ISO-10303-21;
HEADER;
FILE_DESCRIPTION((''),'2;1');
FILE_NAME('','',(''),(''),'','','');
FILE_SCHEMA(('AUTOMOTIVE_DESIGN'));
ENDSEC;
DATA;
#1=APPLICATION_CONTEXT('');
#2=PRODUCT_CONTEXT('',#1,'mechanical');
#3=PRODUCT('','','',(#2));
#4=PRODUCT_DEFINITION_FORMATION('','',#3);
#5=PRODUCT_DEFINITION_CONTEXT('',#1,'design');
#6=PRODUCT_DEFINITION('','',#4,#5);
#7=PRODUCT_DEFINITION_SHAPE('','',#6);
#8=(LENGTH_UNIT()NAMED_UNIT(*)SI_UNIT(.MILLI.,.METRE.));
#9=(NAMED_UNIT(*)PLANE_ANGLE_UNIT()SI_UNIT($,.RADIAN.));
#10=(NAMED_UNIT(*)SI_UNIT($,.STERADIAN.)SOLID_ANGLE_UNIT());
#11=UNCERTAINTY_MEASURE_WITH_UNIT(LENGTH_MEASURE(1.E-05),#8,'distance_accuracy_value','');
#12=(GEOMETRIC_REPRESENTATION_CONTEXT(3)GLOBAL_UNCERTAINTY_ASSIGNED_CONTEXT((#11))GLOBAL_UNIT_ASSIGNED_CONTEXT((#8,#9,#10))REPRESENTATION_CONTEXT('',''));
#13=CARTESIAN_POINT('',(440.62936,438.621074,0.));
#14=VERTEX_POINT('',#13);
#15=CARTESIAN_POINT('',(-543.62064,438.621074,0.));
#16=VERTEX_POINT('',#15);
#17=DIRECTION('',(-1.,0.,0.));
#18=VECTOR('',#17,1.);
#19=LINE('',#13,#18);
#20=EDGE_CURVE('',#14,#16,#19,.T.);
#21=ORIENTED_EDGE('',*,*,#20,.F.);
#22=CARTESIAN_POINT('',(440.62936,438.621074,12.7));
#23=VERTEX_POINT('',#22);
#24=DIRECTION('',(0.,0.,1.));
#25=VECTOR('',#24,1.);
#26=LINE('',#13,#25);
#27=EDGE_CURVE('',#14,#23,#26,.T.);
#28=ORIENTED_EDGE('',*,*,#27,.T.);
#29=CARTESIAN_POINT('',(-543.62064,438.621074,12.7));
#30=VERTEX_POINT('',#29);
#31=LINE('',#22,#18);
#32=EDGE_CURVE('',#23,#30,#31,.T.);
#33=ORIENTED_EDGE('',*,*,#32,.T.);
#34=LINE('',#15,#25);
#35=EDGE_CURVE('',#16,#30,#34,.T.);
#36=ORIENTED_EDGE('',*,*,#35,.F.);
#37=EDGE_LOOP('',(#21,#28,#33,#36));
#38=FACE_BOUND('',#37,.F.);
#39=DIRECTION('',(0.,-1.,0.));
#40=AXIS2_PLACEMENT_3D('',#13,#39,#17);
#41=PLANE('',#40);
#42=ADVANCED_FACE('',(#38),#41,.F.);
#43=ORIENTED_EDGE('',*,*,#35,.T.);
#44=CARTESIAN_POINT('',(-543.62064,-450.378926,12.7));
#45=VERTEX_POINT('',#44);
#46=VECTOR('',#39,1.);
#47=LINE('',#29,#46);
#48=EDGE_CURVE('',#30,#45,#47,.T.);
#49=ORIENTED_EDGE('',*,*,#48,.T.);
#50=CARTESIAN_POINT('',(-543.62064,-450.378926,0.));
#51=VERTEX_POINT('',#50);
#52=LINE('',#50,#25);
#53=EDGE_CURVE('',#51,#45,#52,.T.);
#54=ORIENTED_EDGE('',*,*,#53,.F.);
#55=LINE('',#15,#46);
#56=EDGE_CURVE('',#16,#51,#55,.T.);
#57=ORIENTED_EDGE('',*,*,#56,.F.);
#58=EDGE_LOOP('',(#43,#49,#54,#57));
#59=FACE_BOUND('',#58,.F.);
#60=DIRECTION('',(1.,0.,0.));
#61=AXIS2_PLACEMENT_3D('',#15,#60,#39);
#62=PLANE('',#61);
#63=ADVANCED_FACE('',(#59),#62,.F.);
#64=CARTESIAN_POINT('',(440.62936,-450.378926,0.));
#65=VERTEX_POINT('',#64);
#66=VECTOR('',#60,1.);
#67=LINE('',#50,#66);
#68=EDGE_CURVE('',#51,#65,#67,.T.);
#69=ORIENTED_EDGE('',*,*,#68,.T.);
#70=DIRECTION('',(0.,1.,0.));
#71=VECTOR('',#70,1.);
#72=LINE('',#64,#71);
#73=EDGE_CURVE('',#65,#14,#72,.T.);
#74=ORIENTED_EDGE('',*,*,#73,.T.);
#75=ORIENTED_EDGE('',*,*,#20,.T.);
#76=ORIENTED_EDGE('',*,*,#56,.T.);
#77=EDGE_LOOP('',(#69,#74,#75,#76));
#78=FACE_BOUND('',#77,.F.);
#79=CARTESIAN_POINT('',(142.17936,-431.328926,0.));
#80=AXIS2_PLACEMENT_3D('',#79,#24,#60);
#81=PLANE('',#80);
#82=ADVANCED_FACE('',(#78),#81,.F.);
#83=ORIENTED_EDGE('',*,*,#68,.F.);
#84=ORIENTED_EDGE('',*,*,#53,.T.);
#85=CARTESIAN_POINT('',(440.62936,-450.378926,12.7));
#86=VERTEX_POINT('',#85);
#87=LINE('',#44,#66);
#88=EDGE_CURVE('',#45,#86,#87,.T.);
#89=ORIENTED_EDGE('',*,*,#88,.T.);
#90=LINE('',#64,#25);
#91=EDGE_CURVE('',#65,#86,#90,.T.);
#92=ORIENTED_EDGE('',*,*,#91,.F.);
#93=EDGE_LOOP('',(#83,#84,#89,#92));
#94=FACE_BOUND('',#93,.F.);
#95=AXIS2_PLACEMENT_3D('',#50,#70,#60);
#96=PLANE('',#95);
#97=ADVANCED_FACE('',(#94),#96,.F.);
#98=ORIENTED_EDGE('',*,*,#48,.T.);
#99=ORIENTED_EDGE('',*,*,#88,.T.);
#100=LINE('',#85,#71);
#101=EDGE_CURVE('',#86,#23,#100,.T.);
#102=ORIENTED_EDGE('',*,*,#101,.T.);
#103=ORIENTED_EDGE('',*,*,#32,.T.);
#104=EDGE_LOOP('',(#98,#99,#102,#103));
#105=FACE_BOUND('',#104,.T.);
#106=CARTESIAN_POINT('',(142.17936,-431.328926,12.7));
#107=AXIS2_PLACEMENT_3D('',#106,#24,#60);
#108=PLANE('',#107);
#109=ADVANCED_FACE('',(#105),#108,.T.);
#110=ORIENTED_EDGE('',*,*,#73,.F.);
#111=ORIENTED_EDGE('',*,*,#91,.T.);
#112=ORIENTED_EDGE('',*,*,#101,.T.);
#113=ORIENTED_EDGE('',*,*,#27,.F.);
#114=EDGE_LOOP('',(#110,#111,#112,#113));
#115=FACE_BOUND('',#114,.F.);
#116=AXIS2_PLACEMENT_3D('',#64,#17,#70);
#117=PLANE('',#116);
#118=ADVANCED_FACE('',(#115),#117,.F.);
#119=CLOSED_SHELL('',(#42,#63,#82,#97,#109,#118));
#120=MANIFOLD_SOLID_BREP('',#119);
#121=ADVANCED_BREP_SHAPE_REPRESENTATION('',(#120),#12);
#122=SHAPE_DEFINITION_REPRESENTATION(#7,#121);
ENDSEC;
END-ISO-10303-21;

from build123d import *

# Parameters (mm, degrees)
F0_W     = 38.1
F0_H     = 38.1
F0_W_2   = 628.65
F0_H_2   = 812.8
F1_DEPTH = 12.7


with BuildPart() as f1:
    # F0 (on Top) → F1 (new body)
    with BuildSketch(Plane.XY):
        with Locations((142.1793598415, -431.3289260195)):
            Rectangle(F0_W, F0_H)
        Polygon((161.2293598415, 399.428513117), (161.2293598415, -412.2789260195), (161.2293598415, -450.3789260195), (440.6293598415, -450.3789260195), (440.6293598415, 438.6210739805), (161.2293598415, 438.6210739805), (161.2293598415, 400.5210739805), align=None)
        Polygon((123.1293598415, -412.2789260195), (161.2293598415, -412.2789260195), (161.2293598415, 399.428513117), (161.2293598415, 400.5210739805), (123.1293598415, 400.5210739805), align=None)
        Polygon((123.1293598415, -450.3789260195), (123.1293598415, -412.2789260195), (-505.5206401585, -412.2789260195), (-505.5206401585, -450.3789260195), (-488.6698754547, -450.3789260195), align=None)
        with Locations((-191.1956401585, -5.8789260195)):
            Rectangle(F0_W_2, F0_H_2)
        with Locations((-524.5706401585, -431.3289260195)):
            Rectangle(F0_W, F0_H)
        with Locations((-524.5706401585, -5.8789260195)):
            Rectangle(F0_W, F0_H_2)
        with Locations((-191.1956401585, 419.5710739805)):
            Rectangle(F0_W_2, F0_H)
        with Locations((142.1793598415, 419.5710739805)):
            Rectangle(F0_W, F0_H)
        with Locations((-524.5706401585, 419.5710739805)):
            Rectangle(F0_W, F0_H)
    extrude(amount=F1_DEPTH)


solid = f1.part
